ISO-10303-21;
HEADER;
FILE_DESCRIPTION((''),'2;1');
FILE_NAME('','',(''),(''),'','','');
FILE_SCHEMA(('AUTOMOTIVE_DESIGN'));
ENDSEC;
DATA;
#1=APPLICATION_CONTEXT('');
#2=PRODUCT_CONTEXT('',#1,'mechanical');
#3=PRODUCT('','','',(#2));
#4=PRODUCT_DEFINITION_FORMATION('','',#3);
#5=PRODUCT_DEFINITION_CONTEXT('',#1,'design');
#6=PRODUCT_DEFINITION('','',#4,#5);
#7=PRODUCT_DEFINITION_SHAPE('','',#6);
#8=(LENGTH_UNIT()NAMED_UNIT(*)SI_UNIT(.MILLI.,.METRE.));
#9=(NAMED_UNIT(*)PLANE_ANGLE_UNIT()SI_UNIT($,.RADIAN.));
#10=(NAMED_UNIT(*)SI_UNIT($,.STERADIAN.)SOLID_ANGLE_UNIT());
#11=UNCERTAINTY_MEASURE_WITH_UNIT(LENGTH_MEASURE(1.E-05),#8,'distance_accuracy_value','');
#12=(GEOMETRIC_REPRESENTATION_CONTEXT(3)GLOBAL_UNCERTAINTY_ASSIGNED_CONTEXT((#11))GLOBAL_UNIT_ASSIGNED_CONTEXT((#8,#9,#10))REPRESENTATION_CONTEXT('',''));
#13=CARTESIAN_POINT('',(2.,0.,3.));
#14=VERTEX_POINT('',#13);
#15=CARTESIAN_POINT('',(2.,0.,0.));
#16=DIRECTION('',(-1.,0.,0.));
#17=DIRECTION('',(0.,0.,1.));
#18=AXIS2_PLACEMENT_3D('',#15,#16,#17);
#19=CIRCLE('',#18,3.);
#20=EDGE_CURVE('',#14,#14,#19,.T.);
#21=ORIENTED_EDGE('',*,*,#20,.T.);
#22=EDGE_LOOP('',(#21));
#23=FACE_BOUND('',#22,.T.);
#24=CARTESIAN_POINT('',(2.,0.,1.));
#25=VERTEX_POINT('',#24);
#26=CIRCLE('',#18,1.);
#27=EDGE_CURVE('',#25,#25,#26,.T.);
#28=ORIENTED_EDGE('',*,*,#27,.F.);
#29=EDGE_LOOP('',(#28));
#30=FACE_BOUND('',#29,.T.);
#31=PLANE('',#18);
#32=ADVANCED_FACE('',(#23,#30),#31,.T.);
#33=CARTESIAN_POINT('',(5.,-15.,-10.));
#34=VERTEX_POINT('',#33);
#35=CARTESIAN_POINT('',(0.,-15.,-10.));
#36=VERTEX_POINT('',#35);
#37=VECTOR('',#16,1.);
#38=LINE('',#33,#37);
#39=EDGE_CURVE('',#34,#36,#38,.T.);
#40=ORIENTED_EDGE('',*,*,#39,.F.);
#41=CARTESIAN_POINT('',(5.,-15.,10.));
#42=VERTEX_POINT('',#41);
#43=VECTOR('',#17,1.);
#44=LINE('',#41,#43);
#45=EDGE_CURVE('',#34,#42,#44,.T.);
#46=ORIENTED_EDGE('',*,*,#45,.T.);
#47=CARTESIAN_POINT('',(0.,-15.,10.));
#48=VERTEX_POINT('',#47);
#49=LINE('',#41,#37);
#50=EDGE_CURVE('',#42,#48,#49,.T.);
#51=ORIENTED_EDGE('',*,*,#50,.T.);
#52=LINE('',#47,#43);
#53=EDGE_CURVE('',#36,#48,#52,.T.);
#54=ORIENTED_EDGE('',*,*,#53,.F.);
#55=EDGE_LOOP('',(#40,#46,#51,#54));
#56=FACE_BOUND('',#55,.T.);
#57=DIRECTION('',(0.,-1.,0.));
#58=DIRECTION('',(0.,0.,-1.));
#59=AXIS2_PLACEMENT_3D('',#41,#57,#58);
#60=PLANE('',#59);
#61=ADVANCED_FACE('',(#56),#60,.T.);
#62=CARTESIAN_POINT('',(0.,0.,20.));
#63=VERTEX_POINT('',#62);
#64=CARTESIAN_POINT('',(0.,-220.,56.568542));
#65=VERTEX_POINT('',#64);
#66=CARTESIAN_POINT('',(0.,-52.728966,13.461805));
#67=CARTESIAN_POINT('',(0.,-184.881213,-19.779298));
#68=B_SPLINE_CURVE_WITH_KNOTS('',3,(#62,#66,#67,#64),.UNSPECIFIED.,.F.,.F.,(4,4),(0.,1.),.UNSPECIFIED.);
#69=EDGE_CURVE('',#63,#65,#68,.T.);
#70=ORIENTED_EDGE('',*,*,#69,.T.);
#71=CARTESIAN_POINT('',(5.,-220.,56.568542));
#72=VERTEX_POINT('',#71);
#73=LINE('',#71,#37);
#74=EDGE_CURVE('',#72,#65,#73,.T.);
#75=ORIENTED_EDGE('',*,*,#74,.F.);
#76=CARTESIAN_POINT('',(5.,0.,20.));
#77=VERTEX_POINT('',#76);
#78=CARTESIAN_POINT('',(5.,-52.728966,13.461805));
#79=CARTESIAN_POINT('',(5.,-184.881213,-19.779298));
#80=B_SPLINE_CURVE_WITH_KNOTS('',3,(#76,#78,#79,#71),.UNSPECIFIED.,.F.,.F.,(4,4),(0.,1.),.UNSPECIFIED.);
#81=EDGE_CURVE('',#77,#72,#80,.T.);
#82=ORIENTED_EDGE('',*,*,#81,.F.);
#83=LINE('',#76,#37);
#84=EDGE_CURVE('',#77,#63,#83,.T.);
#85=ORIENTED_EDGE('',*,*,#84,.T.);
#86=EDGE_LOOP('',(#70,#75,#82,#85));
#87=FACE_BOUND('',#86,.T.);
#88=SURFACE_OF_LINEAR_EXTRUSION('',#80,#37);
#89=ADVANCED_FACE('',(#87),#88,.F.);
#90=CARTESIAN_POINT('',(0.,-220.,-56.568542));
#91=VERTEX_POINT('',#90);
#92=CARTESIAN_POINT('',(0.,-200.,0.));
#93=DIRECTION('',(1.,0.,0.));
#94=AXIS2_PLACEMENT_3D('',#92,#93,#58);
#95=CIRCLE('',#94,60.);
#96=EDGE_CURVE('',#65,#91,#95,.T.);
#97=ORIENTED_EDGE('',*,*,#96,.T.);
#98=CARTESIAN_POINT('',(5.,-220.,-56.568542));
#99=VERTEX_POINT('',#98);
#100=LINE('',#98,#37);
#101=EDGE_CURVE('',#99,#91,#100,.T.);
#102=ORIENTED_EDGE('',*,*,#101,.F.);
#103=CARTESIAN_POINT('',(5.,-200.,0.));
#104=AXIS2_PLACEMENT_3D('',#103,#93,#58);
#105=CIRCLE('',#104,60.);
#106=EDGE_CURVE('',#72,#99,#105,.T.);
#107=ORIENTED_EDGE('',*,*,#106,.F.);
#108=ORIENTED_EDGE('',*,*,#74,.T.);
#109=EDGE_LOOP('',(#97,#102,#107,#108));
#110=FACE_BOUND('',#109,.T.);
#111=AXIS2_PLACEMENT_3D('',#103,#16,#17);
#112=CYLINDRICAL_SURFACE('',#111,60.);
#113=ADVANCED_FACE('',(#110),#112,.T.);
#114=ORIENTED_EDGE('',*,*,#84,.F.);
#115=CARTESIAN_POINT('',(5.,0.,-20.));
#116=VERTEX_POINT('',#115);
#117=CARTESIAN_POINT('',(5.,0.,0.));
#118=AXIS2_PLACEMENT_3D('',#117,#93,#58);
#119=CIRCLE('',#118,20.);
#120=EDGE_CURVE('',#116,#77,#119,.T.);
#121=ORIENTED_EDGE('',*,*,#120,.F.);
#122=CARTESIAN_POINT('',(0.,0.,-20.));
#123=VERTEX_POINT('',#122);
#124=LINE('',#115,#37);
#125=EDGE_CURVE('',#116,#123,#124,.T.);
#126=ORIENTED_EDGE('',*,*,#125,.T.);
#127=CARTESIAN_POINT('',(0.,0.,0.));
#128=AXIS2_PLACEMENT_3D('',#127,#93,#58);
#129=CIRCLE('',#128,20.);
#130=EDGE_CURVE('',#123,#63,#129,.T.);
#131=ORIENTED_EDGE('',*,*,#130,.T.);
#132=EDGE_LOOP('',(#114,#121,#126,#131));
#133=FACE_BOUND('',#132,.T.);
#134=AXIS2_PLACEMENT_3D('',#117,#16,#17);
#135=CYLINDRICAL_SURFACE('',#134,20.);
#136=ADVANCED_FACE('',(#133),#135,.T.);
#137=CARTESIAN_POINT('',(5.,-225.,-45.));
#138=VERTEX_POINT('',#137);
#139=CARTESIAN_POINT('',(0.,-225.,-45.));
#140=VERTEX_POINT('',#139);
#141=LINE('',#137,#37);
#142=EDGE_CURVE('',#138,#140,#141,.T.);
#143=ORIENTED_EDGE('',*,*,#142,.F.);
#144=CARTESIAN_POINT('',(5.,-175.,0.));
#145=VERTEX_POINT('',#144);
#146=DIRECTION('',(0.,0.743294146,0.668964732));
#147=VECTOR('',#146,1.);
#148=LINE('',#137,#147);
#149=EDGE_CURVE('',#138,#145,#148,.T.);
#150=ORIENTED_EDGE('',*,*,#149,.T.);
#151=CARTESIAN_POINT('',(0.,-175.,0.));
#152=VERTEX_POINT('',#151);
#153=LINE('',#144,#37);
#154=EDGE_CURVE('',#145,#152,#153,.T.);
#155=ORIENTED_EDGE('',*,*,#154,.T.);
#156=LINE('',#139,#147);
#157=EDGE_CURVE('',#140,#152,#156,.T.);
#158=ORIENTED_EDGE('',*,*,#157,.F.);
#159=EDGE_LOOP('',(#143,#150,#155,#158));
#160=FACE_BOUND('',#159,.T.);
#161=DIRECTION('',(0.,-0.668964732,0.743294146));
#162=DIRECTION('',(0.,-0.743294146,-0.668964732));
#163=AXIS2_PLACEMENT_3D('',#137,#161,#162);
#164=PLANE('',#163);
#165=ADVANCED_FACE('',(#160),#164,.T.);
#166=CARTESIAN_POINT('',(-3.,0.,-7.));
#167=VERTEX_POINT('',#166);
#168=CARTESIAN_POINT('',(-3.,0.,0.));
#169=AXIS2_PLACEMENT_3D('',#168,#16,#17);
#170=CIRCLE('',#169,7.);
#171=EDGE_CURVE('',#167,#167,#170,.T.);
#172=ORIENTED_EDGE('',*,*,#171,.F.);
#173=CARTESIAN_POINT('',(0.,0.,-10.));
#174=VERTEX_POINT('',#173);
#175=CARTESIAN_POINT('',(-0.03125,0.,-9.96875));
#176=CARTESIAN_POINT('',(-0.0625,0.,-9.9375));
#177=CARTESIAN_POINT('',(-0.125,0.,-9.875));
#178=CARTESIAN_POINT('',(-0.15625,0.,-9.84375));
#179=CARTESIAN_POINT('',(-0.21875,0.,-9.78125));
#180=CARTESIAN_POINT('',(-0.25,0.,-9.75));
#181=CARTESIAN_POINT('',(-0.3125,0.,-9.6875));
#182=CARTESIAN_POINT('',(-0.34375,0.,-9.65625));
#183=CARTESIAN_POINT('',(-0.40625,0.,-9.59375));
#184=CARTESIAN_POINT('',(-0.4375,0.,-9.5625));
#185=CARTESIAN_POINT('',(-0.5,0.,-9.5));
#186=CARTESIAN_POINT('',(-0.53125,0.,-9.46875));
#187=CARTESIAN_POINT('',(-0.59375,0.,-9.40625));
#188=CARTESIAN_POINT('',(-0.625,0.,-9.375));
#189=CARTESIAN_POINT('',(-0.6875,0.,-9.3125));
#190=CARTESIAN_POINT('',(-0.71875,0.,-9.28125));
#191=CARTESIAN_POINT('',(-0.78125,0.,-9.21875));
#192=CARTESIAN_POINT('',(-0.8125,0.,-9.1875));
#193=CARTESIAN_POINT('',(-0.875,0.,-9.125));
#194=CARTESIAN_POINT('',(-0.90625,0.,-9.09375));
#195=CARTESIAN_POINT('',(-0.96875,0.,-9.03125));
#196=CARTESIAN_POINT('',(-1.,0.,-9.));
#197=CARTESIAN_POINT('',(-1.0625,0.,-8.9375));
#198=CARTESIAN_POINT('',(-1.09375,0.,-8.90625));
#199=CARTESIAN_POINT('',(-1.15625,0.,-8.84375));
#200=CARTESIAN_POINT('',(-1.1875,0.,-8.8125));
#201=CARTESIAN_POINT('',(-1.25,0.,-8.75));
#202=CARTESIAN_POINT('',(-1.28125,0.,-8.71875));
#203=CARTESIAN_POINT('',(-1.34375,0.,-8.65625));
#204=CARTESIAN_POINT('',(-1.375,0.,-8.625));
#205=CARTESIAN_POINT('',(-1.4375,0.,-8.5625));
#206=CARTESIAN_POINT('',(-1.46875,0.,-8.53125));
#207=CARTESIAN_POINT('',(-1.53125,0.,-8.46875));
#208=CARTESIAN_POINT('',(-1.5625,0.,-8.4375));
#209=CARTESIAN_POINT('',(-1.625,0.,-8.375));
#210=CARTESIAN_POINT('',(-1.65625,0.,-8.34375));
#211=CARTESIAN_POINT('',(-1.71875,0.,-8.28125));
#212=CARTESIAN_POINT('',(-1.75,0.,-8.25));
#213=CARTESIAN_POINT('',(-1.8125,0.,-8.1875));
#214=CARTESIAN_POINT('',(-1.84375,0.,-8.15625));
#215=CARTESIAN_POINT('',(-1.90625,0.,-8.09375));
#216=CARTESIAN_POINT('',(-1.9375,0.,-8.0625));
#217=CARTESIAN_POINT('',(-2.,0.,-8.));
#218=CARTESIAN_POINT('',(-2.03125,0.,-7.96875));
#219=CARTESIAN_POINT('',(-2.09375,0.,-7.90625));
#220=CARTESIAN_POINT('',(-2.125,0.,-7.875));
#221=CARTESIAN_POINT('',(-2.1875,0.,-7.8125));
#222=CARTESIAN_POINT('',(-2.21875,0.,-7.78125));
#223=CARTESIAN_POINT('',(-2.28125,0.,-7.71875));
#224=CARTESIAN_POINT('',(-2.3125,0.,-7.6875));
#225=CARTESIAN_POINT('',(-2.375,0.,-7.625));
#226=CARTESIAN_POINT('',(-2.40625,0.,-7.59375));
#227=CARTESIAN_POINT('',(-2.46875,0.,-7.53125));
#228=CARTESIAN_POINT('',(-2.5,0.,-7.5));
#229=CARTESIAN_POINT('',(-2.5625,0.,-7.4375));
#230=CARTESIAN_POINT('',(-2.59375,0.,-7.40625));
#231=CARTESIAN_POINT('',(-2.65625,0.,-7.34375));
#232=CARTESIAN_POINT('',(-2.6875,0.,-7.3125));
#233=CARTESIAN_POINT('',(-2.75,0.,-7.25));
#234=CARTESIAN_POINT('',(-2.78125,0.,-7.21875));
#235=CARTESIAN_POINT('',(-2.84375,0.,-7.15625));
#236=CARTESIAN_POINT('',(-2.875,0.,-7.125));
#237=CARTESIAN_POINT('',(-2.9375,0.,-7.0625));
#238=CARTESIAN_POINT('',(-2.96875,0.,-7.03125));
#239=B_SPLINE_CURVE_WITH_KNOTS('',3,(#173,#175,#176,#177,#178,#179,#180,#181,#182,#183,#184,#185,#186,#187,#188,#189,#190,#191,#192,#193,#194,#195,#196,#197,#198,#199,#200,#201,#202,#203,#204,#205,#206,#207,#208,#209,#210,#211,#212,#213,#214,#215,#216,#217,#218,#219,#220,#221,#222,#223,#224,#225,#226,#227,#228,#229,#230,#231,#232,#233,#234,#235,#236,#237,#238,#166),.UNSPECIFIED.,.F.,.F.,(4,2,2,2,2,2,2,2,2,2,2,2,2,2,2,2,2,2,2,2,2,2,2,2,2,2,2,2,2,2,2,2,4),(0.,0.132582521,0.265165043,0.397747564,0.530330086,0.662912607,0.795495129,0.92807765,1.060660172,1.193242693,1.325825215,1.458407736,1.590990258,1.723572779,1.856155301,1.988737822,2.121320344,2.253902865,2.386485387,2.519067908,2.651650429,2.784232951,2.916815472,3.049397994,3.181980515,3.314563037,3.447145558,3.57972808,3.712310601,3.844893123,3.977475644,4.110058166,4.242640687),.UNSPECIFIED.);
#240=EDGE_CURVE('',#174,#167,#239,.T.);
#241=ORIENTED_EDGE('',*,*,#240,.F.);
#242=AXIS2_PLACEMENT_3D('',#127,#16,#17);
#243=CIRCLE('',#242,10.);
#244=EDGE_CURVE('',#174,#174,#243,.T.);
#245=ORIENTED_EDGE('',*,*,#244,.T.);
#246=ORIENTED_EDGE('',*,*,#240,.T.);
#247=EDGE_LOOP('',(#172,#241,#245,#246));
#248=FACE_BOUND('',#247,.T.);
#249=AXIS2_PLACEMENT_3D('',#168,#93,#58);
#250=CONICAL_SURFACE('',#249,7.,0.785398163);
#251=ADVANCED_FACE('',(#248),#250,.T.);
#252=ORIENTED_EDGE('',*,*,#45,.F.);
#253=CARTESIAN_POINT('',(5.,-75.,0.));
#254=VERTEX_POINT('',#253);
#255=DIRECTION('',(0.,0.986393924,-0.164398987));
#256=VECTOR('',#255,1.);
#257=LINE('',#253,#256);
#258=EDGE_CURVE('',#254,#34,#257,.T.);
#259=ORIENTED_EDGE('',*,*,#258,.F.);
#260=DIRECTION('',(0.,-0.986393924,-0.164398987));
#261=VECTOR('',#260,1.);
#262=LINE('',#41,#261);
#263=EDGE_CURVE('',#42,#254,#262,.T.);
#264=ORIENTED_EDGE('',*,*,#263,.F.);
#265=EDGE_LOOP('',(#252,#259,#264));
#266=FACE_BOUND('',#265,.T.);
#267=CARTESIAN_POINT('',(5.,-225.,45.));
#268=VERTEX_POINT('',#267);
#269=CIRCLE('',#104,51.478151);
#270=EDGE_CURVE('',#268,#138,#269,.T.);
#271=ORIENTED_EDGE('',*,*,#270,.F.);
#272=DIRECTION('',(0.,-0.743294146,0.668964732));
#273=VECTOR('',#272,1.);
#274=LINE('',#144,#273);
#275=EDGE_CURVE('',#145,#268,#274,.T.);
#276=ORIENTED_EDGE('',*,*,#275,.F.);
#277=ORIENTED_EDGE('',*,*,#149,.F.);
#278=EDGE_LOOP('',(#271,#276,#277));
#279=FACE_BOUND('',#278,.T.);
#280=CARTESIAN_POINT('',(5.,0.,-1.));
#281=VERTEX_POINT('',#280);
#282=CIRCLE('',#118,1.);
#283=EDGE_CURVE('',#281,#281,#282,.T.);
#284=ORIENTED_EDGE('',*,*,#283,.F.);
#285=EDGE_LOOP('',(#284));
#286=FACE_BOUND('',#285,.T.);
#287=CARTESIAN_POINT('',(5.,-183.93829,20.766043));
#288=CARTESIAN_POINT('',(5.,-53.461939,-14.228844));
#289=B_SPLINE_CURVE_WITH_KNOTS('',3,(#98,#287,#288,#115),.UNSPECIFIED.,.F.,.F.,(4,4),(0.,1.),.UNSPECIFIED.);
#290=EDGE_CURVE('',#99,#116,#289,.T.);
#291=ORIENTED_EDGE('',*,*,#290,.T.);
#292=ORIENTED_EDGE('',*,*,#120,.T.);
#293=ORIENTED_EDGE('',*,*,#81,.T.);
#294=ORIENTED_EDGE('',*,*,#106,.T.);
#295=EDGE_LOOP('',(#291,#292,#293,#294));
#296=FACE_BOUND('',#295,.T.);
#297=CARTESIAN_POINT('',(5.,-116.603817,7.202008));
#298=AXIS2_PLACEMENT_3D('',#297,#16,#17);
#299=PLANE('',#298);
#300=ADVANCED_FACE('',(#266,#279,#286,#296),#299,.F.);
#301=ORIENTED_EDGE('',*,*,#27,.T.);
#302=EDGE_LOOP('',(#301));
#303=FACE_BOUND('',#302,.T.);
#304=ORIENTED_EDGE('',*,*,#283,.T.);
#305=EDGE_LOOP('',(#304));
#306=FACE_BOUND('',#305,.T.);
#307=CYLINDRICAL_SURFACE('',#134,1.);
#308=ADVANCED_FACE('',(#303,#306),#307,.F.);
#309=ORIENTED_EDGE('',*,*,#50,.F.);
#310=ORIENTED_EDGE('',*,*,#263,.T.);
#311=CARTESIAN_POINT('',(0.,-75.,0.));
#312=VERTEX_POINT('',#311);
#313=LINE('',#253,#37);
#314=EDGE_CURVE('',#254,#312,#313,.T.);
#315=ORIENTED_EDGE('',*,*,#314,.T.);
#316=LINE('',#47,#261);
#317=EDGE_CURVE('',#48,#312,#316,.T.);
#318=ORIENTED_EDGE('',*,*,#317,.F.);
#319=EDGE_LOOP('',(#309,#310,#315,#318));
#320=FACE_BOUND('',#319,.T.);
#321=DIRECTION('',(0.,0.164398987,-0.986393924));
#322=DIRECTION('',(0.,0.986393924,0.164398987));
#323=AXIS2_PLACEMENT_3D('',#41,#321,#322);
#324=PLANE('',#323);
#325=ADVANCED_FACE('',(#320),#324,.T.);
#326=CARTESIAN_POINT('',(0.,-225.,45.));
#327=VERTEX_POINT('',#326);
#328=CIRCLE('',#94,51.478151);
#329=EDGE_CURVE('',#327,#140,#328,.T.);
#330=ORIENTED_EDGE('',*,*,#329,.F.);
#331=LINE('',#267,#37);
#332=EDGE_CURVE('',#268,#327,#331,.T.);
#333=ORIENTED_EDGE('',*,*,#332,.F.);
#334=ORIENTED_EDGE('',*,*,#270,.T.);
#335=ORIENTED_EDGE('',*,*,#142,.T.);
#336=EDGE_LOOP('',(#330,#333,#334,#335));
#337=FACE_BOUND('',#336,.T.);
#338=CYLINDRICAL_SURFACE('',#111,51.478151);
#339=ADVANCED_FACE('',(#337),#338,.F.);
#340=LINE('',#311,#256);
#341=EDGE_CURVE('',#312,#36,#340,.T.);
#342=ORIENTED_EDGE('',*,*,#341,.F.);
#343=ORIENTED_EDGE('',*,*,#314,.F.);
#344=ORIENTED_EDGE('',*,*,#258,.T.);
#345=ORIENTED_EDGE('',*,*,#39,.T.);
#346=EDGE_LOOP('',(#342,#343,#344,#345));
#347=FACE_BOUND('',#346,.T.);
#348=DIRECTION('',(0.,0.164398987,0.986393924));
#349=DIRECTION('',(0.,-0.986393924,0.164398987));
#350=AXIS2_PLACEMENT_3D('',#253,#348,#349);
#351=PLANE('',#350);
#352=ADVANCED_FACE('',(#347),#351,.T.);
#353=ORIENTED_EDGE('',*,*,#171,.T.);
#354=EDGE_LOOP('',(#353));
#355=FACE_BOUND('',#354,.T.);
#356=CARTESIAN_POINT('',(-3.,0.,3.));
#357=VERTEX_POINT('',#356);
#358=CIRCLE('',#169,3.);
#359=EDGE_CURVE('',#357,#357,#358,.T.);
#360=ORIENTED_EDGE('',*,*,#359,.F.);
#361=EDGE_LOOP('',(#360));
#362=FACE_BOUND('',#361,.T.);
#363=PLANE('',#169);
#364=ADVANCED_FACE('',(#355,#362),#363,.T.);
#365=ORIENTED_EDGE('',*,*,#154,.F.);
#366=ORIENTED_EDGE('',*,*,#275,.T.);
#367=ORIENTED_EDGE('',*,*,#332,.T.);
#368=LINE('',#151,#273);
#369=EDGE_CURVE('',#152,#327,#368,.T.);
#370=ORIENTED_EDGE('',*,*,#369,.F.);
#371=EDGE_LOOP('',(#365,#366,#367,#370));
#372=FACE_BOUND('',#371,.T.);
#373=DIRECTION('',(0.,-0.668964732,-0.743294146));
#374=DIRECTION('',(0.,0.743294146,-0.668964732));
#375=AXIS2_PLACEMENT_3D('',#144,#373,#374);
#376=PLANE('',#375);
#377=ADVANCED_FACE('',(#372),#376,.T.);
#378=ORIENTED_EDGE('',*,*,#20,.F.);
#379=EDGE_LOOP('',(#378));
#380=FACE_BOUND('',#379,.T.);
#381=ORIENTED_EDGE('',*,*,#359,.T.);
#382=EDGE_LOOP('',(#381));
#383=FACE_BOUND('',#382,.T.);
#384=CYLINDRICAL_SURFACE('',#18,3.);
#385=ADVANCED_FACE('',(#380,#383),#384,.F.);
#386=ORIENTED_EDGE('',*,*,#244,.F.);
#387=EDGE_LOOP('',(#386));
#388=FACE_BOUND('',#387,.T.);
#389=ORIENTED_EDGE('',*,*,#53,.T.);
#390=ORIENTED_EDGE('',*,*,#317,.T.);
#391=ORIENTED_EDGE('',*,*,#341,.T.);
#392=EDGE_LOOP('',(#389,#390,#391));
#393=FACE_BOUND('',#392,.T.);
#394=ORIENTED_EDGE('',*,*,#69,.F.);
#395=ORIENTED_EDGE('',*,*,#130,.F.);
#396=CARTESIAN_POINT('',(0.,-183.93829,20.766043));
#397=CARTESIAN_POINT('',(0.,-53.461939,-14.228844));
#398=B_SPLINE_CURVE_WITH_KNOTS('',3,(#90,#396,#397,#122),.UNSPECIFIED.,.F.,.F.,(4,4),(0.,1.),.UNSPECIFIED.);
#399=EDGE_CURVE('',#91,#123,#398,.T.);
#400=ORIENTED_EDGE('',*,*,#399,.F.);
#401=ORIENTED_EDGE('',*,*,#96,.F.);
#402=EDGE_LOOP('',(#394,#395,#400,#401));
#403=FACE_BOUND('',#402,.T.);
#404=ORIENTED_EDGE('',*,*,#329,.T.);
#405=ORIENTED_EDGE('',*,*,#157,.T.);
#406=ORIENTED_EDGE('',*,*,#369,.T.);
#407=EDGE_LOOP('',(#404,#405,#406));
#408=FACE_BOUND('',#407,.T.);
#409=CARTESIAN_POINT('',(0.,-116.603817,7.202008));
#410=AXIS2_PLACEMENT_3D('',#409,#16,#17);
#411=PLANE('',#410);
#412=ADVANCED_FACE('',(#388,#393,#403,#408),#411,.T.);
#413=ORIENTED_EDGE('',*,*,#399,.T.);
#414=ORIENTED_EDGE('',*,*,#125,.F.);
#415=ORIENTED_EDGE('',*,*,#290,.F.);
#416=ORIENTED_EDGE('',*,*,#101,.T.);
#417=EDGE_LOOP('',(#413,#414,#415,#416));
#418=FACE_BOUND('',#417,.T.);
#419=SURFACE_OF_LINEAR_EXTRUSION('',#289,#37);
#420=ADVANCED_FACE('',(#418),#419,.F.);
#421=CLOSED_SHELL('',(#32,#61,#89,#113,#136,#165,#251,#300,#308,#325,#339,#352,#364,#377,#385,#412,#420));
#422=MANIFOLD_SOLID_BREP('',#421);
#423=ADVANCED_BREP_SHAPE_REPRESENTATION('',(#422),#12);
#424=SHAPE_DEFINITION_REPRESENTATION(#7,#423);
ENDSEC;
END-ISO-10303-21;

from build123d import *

# Parameters (mm, degrees)
ESQUISSE1_R             = 1
BOSS_EXTRU_1_DEPTH      = 5
ESQUISSE2_R             = 3
ENL_V_MAT_EXTRU_1_DEPTH = 2
BOSS_EXTRU_2_START      = 3
ESQUISSE3_R             = 10
ESQUISSE3_R_2           = 3
BOSS_EXTRU_2_DEPTH      = 3
CHANFREIN1_SIZE         = 3


with BuildPart() as part:
    # Esquisse1 → Boss.-Extru.1 (new body)
    with BuildSketch(Plane(origin=(0, 0, 0), x_dir=(0, 0, -1), z_dir=(1, 0, 0))):
        with BuildLine():
            ThreePointArc((20, 0), (0, 20), (-20, 0))
            add(Edge.make_bspline(
                [(-56.568542495, -220), (19.779297851, -184.881212826), (-13.461804543, -52.728965786), (-20, 0)],
                knots=[0, 0, 0, 0, 1, 1, 1, 1], degree=3))
            ThreePointArc((-56.568542495, -220), (0, -260), (56.568542495, -220))
            add(Edge.make_bspline(
                [(56.568542495, -220), (-20.766043456, -183.938290331), (14.228843578, -53.461939266), (20, 0)],
                knots=[0, 0, 0, 0, 1, 1, 1, 1], degree=3))
        make_face()
        Circle(ESQUISSE1_R, mode=Mode.SUBTRACT)
        with BuildLine():
            Line((45, -225), (0, -175))
            Line((0, -175), (-45, -225))
            ThreePointArc((-45, -225), (0, -251.478150705), (45, -225))
        make_face(mode=Mode.SUBTRACT)
        Polygon((-10, -15), (10, -15), (0, -75), align=None, mode=Mode.SUBTRACT)
    extrude(amount=BOSS_EXTRU_1_DEPTH)

    # Esquisse2 → Enlèv. mat.-Extru.1 (cut)
    with BuildSketch(Plane.ZY):
        Circle(ESQUISSE2_R)
    extrude(amount=-ENL_V_MAT_EXTRU_1_DEPTH, mode=Mode.SUBTRACT)

    # Esquisse3 → Boss.-Extru.2 (add)
    with BuildSketch(Plane.ZY.offset(BOSS_EXTRU_2_START)):
        Circle(ESQUISSE3_R)
        Circle(ESQUISSE3_R_2, mode=Mode.SUBTRACT)
    extrude(amount=-BOSS_EXTRU_2_DEPTH)

    # Chanfrein1
    chanfrein1_edges = [part.edges().sort_by_distance(p)[0] for p in [
        (-3, 0, -10),
    ]]
    chamfer(chanfrein1_edges, length=CHANFREIN1_SIZE - 0.0001)  # a hair under: the kernel refuses the full size


solid = part.part
